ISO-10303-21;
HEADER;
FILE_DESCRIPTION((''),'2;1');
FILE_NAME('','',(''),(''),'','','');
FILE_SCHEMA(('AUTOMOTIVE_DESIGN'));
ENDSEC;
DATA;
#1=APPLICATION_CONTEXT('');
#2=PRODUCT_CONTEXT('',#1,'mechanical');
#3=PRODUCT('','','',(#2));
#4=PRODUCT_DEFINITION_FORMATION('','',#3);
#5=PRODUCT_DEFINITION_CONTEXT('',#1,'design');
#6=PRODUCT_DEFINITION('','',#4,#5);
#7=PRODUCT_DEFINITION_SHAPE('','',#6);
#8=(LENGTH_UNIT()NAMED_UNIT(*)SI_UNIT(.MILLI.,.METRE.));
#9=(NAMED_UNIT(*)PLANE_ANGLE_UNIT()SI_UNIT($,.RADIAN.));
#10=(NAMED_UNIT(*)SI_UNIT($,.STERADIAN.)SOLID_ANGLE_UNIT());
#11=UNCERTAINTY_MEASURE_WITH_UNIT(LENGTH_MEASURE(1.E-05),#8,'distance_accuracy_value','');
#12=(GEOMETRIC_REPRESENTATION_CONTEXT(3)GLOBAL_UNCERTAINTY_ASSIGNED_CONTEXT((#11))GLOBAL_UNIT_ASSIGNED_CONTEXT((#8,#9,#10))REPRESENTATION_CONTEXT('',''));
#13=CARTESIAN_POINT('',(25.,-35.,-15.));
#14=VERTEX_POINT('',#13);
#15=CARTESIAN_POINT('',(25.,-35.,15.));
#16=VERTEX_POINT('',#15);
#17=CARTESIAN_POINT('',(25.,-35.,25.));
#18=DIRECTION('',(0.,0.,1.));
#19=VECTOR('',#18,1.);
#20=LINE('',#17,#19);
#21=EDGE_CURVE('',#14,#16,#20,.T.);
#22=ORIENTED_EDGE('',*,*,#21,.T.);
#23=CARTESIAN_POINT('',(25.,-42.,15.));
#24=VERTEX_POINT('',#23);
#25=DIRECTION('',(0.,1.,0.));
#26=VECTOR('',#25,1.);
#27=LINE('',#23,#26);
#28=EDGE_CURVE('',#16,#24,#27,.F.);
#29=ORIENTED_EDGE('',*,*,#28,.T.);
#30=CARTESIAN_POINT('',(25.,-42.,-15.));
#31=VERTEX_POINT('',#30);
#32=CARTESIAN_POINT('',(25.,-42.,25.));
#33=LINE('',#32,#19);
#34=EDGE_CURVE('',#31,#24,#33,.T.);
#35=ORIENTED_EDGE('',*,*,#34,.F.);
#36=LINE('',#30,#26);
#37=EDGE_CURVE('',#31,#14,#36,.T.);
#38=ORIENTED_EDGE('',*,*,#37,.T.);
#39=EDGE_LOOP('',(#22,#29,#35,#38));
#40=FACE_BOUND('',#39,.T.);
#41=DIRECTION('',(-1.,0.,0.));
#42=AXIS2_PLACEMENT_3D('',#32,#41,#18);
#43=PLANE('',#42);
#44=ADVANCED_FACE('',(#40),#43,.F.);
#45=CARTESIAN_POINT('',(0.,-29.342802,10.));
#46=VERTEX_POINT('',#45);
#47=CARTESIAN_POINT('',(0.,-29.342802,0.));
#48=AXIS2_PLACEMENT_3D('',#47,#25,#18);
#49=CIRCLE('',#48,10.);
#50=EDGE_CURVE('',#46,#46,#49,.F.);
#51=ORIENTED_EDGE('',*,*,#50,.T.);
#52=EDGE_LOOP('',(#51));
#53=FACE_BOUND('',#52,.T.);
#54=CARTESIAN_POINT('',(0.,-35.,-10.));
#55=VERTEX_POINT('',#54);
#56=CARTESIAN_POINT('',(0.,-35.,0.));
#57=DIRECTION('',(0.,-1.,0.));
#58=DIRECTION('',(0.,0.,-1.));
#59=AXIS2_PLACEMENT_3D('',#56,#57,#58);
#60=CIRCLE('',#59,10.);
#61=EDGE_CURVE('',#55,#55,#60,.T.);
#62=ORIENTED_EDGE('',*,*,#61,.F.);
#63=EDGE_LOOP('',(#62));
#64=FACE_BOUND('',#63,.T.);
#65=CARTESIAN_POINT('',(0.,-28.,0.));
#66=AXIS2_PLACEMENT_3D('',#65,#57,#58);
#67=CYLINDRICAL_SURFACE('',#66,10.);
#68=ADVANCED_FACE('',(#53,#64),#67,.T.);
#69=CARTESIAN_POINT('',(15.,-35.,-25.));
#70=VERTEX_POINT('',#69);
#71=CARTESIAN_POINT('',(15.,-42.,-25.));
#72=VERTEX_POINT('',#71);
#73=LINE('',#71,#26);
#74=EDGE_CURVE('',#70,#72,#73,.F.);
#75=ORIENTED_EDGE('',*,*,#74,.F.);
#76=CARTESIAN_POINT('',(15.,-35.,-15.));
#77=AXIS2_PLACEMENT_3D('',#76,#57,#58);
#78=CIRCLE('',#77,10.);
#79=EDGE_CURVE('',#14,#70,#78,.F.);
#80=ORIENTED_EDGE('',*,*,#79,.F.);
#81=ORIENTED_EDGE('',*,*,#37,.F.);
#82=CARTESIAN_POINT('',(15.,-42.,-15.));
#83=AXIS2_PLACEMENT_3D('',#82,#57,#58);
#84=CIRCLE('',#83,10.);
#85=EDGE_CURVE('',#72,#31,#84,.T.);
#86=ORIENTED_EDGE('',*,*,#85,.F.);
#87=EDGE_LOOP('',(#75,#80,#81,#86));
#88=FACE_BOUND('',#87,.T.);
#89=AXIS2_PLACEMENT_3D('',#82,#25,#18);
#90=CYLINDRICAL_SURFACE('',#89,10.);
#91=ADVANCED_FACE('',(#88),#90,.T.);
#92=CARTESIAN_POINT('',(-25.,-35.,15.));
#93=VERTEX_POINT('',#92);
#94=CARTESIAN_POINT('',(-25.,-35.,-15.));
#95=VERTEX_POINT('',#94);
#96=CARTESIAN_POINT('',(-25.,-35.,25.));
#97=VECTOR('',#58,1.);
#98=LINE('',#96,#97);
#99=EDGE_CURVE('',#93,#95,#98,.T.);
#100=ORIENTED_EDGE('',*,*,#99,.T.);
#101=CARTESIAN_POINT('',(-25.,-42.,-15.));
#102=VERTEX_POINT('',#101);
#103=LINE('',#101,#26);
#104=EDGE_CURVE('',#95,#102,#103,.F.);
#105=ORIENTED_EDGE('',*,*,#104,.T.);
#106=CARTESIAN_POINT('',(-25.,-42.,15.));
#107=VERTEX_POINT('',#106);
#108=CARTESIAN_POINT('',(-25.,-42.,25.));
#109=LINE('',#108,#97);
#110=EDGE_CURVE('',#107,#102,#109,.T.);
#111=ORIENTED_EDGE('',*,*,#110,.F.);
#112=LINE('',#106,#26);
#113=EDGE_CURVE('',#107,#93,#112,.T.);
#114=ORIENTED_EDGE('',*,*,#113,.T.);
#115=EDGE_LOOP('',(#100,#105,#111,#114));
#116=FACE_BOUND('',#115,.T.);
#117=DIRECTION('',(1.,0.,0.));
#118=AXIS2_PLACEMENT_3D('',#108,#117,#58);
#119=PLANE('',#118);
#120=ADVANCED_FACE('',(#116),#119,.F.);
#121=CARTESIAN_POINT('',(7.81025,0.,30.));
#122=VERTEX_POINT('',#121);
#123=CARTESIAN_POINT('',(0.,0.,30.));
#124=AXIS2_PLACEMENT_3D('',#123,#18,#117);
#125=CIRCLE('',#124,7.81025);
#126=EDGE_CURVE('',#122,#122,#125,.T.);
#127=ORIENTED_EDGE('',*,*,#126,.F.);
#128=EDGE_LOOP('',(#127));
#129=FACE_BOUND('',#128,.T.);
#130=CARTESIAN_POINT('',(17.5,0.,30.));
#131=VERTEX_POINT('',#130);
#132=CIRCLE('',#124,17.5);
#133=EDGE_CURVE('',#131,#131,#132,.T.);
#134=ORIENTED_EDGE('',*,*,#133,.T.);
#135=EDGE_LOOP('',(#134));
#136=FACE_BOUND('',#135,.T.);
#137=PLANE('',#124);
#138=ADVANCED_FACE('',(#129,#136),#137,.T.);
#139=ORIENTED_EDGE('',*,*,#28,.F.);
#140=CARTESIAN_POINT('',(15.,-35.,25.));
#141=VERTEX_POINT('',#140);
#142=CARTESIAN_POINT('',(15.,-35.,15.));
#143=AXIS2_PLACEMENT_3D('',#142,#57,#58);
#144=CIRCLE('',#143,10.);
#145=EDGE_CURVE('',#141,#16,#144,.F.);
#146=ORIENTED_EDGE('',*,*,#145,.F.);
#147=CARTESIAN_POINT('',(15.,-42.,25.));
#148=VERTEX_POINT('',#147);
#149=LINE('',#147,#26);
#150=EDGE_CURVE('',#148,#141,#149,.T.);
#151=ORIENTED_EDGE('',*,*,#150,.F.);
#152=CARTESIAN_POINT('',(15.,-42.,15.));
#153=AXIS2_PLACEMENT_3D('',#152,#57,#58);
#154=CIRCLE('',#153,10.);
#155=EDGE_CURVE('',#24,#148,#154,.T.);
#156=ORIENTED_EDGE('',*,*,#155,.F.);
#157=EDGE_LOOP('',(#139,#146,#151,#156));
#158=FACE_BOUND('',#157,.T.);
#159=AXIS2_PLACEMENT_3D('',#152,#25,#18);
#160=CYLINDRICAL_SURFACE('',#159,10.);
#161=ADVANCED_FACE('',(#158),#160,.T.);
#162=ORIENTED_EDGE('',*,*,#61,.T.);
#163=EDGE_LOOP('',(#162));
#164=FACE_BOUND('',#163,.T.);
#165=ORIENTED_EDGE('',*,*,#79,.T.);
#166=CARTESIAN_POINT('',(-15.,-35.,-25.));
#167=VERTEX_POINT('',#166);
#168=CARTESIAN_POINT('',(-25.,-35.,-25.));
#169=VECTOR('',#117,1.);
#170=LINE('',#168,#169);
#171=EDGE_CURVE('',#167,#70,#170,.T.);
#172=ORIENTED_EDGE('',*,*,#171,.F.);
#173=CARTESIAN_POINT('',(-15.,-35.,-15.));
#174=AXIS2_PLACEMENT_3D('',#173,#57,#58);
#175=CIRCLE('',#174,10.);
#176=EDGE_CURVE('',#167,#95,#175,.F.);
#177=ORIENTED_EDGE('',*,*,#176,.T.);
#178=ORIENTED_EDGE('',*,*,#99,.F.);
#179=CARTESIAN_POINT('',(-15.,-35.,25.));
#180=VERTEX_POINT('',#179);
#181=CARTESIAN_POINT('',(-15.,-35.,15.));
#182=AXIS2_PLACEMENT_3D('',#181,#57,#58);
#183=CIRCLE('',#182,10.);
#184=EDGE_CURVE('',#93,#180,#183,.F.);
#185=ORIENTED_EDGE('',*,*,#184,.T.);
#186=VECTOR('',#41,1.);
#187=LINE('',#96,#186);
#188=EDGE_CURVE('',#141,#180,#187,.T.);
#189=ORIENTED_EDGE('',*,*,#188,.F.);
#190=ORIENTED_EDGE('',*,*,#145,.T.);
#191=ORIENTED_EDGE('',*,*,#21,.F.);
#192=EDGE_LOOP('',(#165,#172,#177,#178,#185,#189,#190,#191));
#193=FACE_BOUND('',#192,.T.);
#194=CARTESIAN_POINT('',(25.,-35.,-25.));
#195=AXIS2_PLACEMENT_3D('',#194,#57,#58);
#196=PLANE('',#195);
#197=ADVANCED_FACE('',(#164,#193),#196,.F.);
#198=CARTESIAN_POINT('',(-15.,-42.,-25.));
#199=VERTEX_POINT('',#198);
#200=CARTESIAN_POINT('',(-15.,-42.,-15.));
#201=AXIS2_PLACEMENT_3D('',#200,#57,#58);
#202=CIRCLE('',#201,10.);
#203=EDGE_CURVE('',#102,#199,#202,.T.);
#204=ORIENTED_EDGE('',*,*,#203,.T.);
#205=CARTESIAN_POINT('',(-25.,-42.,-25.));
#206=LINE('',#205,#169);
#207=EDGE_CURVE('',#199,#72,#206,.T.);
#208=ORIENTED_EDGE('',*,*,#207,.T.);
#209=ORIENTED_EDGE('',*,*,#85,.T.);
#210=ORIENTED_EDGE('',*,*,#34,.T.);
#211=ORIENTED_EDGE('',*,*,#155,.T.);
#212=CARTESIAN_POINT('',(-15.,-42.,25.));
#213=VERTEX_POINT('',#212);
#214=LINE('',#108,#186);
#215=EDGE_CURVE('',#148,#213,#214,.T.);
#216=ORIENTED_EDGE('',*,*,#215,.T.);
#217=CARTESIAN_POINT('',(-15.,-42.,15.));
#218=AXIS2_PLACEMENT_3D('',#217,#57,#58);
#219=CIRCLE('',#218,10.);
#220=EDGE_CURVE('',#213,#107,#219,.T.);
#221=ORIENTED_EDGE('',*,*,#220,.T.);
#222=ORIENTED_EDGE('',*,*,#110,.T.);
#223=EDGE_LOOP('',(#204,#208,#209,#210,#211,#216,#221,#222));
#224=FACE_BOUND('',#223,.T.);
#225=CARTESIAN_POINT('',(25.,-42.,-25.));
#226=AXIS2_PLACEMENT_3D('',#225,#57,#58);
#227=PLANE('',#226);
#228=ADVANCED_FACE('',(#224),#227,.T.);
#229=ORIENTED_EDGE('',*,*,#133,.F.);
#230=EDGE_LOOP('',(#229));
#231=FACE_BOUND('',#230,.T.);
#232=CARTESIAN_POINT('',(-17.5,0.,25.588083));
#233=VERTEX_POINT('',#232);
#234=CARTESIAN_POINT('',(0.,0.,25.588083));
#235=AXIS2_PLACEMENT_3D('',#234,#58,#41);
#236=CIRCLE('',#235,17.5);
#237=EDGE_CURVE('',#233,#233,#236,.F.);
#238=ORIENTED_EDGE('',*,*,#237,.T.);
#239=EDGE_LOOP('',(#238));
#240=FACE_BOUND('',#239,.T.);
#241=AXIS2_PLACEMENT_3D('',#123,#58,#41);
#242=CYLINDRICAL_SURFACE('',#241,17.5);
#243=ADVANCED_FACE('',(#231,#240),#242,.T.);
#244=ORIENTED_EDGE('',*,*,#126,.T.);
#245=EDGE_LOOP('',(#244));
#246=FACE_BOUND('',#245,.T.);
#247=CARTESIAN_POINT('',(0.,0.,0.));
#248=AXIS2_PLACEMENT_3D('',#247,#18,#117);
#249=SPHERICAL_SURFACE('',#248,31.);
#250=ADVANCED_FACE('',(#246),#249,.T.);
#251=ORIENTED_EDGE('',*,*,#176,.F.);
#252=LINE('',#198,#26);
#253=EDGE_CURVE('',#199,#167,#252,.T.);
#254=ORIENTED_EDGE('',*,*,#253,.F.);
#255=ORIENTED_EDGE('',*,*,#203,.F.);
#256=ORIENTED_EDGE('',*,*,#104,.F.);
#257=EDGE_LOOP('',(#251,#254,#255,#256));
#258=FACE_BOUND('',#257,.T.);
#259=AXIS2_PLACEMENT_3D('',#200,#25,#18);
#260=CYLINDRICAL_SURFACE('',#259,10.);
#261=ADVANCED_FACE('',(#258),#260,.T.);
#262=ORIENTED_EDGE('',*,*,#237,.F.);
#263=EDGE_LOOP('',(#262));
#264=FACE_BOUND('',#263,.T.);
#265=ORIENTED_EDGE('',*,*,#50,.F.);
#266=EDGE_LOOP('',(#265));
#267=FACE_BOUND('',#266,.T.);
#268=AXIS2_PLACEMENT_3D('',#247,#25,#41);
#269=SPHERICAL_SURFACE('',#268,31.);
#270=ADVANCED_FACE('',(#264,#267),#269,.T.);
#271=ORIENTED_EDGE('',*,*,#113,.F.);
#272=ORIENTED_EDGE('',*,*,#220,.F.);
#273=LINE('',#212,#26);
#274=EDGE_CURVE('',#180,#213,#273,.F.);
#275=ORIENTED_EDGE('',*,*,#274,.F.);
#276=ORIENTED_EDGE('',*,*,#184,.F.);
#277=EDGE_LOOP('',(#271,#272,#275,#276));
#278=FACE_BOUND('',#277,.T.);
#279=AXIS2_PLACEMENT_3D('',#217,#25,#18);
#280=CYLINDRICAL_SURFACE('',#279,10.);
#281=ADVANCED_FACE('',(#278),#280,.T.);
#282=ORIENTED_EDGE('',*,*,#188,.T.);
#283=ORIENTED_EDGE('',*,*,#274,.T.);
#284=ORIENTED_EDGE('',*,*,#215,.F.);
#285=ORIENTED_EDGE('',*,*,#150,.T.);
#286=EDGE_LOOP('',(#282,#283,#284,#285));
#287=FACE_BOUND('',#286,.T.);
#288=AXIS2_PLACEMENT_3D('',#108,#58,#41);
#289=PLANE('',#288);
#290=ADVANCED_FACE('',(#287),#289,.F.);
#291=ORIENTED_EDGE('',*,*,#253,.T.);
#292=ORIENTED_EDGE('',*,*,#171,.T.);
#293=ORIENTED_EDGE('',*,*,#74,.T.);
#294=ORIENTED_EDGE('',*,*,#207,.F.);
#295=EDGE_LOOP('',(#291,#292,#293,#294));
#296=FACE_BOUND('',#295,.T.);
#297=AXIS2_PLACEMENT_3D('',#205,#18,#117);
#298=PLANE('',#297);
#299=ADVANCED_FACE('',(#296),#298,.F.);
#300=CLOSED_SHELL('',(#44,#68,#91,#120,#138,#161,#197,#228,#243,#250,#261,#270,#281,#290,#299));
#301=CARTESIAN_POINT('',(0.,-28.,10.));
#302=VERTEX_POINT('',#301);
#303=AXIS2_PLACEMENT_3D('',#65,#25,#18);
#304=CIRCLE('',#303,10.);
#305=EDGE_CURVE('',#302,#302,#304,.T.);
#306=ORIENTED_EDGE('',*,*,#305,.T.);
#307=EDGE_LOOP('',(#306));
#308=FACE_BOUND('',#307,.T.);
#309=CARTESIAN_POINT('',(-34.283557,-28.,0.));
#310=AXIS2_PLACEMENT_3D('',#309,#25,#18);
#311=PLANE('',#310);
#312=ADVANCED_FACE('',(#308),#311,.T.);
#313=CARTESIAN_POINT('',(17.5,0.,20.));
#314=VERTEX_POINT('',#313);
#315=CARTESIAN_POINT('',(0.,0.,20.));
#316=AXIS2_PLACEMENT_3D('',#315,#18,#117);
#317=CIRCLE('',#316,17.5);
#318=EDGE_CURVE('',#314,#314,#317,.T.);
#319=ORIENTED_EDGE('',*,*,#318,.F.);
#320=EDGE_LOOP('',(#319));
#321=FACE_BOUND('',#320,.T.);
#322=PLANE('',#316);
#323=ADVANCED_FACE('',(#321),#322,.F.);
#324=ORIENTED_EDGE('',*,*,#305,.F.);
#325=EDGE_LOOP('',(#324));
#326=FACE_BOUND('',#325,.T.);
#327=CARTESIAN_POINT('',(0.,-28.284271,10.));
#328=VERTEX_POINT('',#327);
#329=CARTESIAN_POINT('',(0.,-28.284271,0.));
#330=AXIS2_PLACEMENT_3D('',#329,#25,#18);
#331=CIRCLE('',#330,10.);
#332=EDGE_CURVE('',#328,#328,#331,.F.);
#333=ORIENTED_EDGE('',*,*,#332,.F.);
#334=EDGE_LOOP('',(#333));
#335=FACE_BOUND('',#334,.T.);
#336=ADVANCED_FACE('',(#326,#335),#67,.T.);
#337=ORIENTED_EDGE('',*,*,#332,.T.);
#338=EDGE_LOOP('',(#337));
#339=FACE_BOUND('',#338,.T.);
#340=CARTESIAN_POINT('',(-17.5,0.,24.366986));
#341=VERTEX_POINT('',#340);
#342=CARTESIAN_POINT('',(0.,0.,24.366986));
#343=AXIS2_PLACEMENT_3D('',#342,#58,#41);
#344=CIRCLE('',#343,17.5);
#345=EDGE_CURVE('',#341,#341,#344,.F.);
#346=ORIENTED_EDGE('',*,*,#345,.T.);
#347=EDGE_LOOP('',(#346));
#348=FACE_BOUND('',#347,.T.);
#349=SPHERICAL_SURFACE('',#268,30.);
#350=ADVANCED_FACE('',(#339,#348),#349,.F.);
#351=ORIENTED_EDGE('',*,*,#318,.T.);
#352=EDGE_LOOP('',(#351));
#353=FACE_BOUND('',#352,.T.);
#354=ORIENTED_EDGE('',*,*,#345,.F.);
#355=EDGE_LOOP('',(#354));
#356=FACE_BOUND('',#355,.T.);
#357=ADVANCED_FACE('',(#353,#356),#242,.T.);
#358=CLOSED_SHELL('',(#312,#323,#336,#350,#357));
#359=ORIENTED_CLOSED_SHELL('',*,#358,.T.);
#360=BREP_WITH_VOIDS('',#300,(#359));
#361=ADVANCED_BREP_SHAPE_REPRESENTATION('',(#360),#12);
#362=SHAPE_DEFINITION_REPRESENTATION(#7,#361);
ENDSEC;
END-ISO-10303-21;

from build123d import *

# Parameters (mm, degrees)
ESQUISSE3_R          = 17.5
EXTRUSION1_DEPTH     = 10
EXTRUSION3_START     = -35
EXTRUSION3_OUTLINE_R = 10
EXTRUSION3_DEPTH     = 7
ESQUISSE7_W          = 50
ESQUISSE7_H          = 50
EXTRUSION4_DEPTH     = 7
CONG_1_R             = 10


# Read off the part's stored shape, not the designer's step: Extrusion3
with BuildPart() as part:
    # Esquisse1 → Révol.-Mince1 (revolve)
    with BuildSketch(Plane.XY):
        with BuildLine():
            ThreePointArc((0, -30), (30, 0), (0, 30))
            Line((0, 30), (0, 31))
            ThreePointArc((0, 31), (31, 0), (0, -31))
            Line((0, -31), (0, -30))
        make_face()
    revolve(axis=Axis((0, 52.542035398, 0), (0, -1, 0)))

    # Esquisse3 → Extrusion1 (add)
    with BuildSketch(Plane.XY.offset(20)):
        with Locations(Location((0, 0, 0), (0, 0, 180))):
            Circle(ESQUISSE3_R)
    extrude(amount=EXTRUSION1_DEPTH)

    # Extrusion3 outline → Extrusion3 (add)
    with BuildSketch(Plane(origin=(0, 0, 0), x_dir=(1, 0, 0), z_dir=(0, 1, 0)).offset(EXTRUSION3_START)):
        Circle(EXTRUSION3_OUTLINE_R)
    extrude(amount=EXTRUSION3_DEPTH)

    # Esquisse7 → Extrusion4 (add)
    with BuildSketch(Plane.XZ.offset(35)):
        Rectangle(ESQUISSE7_W, ESQUISSE7_H)
    extrude(amount=EXTRUSION4_DEPTH)

    # Congé1
    cong_1_edges = [part.edges().sort_by_distance(p)[0] for p in [
        (25, -38.5, -25),
        (25, -38.5, 25),
        (-25, -38.5, 25),
        (-25, -38.5, -25),
    ]]
    fillet(cong_1_edges, radius=CONG_1_R)


solid = part.part
